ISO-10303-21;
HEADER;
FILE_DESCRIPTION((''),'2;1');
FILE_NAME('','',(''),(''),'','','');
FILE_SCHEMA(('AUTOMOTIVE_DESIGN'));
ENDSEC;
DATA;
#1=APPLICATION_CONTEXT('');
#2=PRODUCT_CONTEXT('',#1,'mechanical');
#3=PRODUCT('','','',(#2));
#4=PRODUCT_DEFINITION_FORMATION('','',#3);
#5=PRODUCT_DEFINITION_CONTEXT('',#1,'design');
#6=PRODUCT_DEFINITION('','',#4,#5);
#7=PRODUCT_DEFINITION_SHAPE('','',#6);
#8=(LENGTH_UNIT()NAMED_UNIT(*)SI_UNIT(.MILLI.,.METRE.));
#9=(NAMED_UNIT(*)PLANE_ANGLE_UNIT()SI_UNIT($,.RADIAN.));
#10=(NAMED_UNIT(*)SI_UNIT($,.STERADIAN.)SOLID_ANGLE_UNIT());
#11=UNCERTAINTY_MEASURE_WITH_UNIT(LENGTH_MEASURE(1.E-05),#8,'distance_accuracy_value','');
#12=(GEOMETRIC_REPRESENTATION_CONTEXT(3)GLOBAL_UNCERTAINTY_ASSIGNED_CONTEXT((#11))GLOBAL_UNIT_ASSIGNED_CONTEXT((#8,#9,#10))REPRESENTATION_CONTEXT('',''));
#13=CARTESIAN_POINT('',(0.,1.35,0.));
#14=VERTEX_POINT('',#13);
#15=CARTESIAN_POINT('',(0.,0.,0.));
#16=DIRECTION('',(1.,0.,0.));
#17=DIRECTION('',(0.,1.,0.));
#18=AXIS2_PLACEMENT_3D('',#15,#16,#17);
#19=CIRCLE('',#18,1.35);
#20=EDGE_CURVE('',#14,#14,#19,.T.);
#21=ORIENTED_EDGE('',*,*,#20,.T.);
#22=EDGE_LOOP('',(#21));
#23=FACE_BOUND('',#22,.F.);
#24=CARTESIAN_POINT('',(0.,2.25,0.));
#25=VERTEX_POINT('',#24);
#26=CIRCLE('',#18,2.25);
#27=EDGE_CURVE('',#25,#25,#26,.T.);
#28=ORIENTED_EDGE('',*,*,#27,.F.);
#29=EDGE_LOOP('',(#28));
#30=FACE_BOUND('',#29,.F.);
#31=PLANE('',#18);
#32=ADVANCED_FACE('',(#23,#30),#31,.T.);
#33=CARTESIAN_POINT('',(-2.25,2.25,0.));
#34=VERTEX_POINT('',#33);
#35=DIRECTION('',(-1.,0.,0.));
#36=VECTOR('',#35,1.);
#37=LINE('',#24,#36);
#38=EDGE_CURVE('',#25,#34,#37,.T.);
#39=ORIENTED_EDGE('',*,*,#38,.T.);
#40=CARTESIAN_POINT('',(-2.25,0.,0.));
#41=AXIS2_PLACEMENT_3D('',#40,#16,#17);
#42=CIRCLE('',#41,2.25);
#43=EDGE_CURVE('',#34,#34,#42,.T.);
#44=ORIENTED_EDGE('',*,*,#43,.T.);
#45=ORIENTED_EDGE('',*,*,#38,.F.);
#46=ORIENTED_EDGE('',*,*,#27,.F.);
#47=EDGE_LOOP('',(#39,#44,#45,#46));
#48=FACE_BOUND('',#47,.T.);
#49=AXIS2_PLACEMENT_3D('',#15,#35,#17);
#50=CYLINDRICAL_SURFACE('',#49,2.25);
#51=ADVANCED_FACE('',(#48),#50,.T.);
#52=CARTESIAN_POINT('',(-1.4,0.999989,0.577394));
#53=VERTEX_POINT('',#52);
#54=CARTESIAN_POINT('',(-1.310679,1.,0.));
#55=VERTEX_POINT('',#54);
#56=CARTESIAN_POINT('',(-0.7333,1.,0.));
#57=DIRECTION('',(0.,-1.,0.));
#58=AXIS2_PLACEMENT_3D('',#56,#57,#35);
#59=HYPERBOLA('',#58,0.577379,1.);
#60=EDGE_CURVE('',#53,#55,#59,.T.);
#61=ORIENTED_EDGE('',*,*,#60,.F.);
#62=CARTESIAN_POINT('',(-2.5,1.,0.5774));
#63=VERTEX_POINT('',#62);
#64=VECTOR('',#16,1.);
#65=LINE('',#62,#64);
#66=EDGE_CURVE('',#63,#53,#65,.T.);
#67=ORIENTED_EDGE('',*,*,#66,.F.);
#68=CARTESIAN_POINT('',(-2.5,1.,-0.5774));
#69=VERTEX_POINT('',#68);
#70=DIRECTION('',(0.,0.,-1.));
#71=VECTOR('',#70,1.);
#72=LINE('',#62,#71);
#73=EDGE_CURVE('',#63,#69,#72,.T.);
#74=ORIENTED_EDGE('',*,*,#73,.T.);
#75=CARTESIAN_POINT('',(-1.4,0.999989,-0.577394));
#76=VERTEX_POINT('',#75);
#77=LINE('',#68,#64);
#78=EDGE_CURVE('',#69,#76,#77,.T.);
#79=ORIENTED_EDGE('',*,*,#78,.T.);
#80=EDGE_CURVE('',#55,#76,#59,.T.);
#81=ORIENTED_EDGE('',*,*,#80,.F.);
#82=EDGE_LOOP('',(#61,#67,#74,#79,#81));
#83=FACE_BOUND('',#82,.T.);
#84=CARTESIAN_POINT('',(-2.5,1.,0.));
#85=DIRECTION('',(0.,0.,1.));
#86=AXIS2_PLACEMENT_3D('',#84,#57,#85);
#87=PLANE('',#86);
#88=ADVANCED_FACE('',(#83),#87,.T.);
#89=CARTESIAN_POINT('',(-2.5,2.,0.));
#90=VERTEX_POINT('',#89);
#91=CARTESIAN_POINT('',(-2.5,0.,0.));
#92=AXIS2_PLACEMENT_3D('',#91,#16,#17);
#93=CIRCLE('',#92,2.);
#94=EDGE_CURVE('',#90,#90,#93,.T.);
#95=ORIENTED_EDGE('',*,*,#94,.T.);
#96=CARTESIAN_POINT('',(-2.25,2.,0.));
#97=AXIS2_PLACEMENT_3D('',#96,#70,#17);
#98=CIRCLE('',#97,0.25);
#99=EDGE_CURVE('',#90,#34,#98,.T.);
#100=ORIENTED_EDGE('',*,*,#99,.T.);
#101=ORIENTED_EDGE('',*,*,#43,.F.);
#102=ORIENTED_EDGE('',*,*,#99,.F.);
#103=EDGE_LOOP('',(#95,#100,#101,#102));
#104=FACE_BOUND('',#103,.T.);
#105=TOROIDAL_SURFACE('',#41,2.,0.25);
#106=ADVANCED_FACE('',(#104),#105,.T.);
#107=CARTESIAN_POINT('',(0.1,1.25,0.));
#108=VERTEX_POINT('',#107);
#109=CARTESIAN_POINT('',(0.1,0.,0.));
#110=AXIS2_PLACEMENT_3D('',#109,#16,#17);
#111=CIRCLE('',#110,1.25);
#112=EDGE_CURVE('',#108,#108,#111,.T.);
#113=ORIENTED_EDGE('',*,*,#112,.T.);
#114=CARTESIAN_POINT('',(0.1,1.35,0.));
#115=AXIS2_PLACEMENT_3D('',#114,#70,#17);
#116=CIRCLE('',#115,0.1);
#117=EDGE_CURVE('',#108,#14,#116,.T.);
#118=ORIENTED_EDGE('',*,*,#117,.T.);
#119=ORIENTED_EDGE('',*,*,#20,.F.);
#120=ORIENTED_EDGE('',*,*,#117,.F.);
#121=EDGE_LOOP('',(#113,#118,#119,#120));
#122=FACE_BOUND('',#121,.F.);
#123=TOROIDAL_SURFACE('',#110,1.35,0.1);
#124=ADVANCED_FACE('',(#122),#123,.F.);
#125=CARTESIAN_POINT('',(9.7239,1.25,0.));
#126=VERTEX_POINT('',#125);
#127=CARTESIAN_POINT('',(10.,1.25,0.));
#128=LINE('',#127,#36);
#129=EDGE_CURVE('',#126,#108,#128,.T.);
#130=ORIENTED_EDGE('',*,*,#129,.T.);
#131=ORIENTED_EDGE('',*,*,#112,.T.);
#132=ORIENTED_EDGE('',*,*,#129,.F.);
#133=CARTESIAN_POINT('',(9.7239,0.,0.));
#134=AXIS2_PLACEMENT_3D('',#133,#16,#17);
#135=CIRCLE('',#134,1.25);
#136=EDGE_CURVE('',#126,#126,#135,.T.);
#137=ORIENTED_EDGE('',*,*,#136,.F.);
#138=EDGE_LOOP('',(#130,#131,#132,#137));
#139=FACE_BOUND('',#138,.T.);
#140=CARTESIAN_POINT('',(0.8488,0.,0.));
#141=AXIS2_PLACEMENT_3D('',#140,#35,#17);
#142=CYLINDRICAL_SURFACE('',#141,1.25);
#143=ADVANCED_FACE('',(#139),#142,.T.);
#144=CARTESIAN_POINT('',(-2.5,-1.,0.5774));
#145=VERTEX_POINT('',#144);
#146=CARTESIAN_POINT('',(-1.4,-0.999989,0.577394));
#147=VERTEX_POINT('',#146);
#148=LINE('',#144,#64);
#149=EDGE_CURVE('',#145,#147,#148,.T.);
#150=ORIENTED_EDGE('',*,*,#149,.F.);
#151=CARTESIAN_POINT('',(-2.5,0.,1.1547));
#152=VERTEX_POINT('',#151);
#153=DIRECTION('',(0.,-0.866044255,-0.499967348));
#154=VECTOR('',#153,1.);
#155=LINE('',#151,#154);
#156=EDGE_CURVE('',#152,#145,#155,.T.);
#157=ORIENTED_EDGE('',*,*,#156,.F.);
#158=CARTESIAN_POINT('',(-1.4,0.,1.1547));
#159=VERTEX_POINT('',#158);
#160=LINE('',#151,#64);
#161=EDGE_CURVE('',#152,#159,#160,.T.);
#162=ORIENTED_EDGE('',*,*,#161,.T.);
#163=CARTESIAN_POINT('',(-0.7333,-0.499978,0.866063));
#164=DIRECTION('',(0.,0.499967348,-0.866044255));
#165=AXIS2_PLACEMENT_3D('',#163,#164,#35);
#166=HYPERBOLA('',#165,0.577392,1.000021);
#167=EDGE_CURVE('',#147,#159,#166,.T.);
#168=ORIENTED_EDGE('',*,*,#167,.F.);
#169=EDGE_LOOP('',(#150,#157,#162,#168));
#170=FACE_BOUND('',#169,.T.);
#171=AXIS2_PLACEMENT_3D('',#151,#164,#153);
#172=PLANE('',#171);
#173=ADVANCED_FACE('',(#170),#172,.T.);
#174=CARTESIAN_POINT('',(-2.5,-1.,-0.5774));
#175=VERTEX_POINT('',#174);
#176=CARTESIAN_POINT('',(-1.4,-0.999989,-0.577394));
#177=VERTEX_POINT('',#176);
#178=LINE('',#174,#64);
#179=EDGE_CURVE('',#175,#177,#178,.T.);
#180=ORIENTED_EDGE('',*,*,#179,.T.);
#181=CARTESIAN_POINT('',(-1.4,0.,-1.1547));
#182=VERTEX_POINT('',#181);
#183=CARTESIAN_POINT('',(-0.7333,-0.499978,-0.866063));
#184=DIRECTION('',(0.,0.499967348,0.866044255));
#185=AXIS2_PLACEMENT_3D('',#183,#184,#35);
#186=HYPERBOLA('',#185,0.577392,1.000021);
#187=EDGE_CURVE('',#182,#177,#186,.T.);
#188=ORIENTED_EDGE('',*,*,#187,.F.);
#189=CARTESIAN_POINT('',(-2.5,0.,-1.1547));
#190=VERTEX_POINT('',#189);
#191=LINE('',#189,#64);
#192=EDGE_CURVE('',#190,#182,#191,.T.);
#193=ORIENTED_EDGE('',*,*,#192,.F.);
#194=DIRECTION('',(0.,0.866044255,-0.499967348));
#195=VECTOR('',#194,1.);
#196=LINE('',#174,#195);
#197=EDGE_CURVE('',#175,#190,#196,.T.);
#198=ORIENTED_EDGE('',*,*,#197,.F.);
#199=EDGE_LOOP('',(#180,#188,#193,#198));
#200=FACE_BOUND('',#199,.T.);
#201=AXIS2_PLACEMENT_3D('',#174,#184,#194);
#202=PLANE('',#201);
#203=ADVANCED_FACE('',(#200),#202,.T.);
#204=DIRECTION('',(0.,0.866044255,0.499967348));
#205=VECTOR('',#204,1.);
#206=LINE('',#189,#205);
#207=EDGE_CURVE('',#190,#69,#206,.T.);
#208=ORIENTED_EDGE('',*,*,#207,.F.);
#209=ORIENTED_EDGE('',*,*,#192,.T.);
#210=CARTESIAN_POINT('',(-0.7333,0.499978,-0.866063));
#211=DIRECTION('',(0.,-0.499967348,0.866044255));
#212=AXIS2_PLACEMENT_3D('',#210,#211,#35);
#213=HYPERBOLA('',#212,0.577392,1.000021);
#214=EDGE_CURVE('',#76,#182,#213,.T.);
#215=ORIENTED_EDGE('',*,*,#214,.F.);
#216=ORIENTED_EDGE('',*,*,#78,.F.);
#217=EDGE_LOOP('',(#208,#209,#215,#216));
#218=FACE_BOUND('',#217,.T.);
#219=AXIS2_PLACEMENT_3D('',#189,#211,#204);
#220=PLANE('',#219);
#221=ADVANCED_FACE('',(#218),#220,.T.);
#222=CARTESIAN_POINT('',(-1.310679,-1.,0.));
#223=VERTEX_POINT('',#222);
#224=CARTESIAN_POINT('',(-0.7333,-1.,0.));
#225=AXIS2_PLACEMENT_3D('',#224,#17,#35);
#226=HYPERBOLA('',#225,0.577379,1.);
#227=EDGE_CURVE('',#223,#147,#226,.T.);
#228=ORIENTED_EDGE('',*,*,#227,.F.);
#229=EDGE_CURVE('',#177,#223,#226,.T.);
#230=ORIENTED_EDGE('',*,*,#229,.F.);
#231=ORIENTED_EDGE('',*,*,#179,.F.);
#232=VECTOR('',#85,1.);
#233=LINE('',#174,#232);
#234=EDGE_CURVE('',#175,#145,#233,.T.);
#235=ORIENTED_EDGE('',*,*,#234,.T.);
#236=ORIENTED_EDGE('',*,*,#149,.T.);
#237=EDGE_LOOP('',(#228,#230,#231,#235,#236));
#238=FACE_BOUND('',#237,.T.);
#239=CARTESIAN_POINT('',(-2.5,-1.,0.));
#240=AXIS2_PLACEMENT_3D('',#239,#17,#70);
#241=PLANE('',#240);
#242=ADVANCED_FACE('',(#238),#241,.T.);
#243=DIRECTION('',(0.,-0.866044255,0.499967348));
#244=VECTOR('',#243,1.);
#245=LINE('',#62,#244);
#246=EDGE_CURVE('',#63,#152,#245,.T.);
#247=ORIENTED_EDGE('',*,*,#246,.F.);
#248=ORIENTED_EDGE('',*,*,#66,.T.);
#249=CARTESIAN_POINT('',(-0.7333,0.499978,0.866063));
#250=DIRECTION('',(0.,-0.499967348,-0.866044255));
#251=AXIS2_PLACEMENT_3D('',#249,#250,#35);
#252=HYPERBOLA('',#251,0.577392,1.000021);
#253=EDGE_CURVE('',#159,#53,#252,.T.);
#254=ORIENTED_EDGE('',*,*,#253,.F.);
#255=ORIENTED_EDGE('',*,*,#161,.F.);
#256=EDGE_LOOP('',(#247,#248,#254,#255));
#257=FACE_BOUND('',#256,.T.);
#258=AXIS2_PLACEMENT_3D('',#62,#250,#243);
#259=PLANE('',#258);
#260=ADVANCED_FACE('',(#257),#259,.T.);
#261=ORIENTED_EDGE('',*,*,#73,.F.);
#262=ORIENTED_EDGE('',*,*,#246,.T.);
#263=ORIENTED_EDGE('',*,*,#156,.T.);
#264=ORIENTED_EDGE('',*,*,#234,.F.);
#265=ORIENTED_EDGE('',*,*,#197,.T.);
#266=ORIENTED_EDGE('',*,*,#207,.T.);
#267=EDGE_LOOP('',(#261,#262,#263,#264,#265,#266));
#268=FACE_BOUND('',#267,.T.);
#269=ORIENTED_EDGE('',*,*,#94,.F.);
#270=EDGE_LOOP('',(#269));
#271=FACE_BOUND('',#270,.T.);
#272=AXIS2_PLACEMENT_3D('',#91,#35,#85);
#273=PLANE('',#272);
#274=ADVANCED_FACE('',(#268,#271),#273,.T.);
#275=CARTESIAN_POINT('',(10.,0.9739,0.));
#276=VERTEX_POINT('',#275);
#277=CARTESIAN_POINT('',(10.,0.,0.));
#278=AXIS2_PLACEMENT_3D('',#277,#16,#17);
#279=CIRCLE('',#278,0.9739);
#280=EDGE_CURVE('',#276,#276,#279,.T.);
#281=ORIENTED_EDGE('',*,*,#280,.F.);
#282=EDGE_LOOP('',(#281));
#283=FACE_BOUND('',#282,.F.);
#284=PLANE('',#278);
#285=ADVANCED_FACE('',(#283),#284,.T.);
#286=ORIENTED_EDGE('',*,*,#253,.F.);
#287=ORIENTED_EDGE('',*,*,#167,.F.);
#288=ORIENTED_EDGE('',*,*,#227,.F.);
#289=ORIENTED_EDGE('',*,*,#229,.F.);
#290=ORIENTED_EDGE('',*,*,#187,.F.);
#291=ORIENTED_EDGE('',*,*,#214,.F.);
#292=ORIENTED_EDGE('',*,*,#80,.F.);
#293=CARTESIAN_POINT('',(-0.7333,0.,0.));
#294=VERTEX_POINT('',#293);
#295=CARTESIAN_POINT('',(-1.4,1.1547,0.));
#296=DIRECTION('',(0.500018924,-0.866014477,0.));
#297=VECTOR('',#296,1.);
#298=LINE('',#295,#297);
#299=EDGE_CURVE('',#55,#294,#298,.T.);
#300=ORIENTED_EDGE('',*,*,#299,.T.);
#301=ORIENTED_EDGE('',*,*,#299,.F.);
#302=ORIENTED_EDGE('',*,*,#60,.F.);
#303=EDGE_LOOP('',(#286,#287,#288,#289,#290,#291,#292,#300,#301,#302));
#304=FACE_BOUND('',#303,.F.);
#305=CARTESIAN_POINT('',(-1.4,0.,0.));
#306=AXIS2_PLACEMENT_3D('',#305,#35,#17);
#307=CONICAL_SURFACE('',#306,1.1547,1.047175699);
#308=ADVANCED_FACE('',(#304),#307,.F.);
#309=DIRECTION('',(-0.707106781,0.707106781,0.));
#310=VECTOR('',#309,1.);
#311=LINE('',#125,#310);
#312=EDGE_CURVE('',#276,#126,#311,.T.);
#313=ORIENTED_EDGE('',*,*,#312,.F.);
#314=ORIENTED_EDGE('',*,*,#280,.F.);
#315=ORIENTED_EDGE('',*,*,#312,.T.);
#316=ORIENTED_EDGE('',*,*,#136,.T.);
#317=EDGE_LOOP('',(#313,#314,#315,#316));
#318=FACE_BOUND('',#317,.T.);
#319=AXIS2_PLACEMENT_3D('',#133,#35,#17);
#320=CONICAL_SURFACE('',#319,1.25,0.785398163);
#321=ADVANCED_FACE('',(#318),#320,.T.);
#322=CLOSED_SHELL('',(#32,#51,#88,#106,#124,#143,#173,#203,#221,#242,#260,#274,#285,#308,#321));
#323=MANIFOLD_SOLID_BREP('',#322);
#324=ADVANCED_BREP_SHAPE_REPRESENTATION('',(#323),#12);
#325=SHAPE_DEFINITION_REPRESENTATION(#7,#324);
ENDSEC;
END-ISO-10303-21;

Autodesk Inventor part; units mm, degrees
ref_plane "YZ Plane" through (0, 0, 0) normal (1, 0, 0) x (0, 1, 0)
ref_plane "XZ Plane" through (0, 0, 0) normal (0, 1, 0) x (-1, 0, 0)
sketch "Sketch1" plane through (0, 0, 0) normal (0, 0, 1) x (1, 0, 0)
  line L0 (-0.7333, 0) -> (10, 0)
  line L1 (10, 0) -> (10, 1.25)
  line L2 (10, 1.25) -> (1.125, 1.25)
  line L3 (1.125, 1.25) -> (0.8488, 1.25)
  line L4 (0.8488, 1.25) -> (0, 1.25)
  line L5 (0, 1.25) -> (0, 2.25)
  line L6 (0, 2.25) -> (-2.5, 2.25)
  line L7 (-2.5, 2.25) -> (-2.5, 1.1547)
  line L8 (-2.5, 1.1547) -> (-1.4, 1.1547)
  line L9 (-1.4, 1.1547) -> (-0.7333, 0)
  line L10 (-5, 0) -> (12.5, 0) projected
  line L11 (0, -0.45) -> (0, 2.7) projected
  line L12 (1.125, 1.25) -> (0, 1.25) construction
  dimension "d1" = 8.875
  dimension "d2" = 0.2762
  dimension "d3" = 2.5
  dimension "d4" = 1.1
  dimension "d5" = 60
  dimension "d6" = 2.5
  dimension "d7" = 2.5
  dimension "d8" = 2.3094
  dimension "d9" = 4.5
  dimension "d26" = 10
revolve "Body" add sketch "Sketch1" angle 360 about axis through (-0.7333, 0, 0) along (1, 0, 0)
sketch "Sketch2" plane through (-2.5, 0, 0) normal (-1, 0, 0) x (0, 0, 1)
  circle A0 centre (0, 0) radius 1.1547 projected
  line L0 (0, -3.15) -> (0, 3.15) projected
  line L1 (-3.15, 0) -> (3.15, 0) projected
  line L2 (1.1547, 0) -> (0.5774, -1)
  line L3 (0.5774, -1) -> (-0.5774, -1)
  line L4 (-0.5774, -1) -> (-1.1547, 0)
  line L5 (-1.1547, 0) -> (-0.5774, 1)
  line L6 (-0.5774, 1) -> (0.5774, 1)
  line L7 (0.5774, 1) -> (1.1547, 0)
extrude "Slot" add sketch "Sketch2" against normal up to next contours L7 A0 | A0 L2 | L6 L0 A0 | A0 L0 L3 | L0 L6 A0 | A0 L3 L0 | L4 A0 | A0 L5
fillet "Fillet1" radius 0.25 1 edges at (-2.5, -2.25, 0)
thread "Thread" size "M2.5x0.45" class "6g" standard "ISO Metric profile" length 8.875
chamfer "Chamfer1" distance 0.2761 distance2 0.2761 1 edges at (10, -1.25, 0) measured on face at (10, -0.2714, -0.6096)
ref_plane "Work Plane1" through (29, 0, 0) normal (0, -1, 0) x (1, 0, 0)
fillet "Fillet2" radius 0.1 1 edges at (0, -1.25, 0)
equation "\"d30\" = R"
equation "\"d17\" = RR"
equation "\"d13\" = GEL"
equation "\"d15\" = -0.5 * SPD + 0.5 * GD"
equation "\"d16\" = GUL"
equation "\"d1\" = GEL"
equation "\"d3\" = KOH"
equation "\"d4\" = INTI"
equation "\"d6\" = GD"
equation "\"d7\" = BDM"
equation "\"d8\" = 1.1547 * SW"
equation "\"d9\" = KOD"
equation "\"d26\" = NLG"
equation "\"GD\" = NND"
equation "\"NLG\" = 10"
equation "\"GEL\" = 8.875"
equation "\"KOD\" = 4.5"
equation "\"KOH\" = NND"
equation "\"INTI\" = 1.1"
equation "\"GAL\" = 0.61345 * PTC"
equation "\"GUL\" = 0.61345 * PTC"
equation "\"BDM\" = NND"
equation "\"SW\" = 2"
equation "\"RR\" = 0.1 * NND"
equation "\"SPD\" = NND - 1.2269 * PTC"
equation "\"R\" = 0.1"
equation "\"TOA\" = 30deg"
equation "\"GD1\" = THREADDIA - 1.2269 * PTC"
equation "\"THREADDIA\" = NND"
equation "\"FAWI\" = 45deg"
equation "\"PTC\" = 0.45"
equation "\"NND\" = 2.5"
equation "\"E0\" = 1.155 * SW"
properties part number "BS EN ISO 4762 - M2,5 x 10" material "Steel, Mild"
